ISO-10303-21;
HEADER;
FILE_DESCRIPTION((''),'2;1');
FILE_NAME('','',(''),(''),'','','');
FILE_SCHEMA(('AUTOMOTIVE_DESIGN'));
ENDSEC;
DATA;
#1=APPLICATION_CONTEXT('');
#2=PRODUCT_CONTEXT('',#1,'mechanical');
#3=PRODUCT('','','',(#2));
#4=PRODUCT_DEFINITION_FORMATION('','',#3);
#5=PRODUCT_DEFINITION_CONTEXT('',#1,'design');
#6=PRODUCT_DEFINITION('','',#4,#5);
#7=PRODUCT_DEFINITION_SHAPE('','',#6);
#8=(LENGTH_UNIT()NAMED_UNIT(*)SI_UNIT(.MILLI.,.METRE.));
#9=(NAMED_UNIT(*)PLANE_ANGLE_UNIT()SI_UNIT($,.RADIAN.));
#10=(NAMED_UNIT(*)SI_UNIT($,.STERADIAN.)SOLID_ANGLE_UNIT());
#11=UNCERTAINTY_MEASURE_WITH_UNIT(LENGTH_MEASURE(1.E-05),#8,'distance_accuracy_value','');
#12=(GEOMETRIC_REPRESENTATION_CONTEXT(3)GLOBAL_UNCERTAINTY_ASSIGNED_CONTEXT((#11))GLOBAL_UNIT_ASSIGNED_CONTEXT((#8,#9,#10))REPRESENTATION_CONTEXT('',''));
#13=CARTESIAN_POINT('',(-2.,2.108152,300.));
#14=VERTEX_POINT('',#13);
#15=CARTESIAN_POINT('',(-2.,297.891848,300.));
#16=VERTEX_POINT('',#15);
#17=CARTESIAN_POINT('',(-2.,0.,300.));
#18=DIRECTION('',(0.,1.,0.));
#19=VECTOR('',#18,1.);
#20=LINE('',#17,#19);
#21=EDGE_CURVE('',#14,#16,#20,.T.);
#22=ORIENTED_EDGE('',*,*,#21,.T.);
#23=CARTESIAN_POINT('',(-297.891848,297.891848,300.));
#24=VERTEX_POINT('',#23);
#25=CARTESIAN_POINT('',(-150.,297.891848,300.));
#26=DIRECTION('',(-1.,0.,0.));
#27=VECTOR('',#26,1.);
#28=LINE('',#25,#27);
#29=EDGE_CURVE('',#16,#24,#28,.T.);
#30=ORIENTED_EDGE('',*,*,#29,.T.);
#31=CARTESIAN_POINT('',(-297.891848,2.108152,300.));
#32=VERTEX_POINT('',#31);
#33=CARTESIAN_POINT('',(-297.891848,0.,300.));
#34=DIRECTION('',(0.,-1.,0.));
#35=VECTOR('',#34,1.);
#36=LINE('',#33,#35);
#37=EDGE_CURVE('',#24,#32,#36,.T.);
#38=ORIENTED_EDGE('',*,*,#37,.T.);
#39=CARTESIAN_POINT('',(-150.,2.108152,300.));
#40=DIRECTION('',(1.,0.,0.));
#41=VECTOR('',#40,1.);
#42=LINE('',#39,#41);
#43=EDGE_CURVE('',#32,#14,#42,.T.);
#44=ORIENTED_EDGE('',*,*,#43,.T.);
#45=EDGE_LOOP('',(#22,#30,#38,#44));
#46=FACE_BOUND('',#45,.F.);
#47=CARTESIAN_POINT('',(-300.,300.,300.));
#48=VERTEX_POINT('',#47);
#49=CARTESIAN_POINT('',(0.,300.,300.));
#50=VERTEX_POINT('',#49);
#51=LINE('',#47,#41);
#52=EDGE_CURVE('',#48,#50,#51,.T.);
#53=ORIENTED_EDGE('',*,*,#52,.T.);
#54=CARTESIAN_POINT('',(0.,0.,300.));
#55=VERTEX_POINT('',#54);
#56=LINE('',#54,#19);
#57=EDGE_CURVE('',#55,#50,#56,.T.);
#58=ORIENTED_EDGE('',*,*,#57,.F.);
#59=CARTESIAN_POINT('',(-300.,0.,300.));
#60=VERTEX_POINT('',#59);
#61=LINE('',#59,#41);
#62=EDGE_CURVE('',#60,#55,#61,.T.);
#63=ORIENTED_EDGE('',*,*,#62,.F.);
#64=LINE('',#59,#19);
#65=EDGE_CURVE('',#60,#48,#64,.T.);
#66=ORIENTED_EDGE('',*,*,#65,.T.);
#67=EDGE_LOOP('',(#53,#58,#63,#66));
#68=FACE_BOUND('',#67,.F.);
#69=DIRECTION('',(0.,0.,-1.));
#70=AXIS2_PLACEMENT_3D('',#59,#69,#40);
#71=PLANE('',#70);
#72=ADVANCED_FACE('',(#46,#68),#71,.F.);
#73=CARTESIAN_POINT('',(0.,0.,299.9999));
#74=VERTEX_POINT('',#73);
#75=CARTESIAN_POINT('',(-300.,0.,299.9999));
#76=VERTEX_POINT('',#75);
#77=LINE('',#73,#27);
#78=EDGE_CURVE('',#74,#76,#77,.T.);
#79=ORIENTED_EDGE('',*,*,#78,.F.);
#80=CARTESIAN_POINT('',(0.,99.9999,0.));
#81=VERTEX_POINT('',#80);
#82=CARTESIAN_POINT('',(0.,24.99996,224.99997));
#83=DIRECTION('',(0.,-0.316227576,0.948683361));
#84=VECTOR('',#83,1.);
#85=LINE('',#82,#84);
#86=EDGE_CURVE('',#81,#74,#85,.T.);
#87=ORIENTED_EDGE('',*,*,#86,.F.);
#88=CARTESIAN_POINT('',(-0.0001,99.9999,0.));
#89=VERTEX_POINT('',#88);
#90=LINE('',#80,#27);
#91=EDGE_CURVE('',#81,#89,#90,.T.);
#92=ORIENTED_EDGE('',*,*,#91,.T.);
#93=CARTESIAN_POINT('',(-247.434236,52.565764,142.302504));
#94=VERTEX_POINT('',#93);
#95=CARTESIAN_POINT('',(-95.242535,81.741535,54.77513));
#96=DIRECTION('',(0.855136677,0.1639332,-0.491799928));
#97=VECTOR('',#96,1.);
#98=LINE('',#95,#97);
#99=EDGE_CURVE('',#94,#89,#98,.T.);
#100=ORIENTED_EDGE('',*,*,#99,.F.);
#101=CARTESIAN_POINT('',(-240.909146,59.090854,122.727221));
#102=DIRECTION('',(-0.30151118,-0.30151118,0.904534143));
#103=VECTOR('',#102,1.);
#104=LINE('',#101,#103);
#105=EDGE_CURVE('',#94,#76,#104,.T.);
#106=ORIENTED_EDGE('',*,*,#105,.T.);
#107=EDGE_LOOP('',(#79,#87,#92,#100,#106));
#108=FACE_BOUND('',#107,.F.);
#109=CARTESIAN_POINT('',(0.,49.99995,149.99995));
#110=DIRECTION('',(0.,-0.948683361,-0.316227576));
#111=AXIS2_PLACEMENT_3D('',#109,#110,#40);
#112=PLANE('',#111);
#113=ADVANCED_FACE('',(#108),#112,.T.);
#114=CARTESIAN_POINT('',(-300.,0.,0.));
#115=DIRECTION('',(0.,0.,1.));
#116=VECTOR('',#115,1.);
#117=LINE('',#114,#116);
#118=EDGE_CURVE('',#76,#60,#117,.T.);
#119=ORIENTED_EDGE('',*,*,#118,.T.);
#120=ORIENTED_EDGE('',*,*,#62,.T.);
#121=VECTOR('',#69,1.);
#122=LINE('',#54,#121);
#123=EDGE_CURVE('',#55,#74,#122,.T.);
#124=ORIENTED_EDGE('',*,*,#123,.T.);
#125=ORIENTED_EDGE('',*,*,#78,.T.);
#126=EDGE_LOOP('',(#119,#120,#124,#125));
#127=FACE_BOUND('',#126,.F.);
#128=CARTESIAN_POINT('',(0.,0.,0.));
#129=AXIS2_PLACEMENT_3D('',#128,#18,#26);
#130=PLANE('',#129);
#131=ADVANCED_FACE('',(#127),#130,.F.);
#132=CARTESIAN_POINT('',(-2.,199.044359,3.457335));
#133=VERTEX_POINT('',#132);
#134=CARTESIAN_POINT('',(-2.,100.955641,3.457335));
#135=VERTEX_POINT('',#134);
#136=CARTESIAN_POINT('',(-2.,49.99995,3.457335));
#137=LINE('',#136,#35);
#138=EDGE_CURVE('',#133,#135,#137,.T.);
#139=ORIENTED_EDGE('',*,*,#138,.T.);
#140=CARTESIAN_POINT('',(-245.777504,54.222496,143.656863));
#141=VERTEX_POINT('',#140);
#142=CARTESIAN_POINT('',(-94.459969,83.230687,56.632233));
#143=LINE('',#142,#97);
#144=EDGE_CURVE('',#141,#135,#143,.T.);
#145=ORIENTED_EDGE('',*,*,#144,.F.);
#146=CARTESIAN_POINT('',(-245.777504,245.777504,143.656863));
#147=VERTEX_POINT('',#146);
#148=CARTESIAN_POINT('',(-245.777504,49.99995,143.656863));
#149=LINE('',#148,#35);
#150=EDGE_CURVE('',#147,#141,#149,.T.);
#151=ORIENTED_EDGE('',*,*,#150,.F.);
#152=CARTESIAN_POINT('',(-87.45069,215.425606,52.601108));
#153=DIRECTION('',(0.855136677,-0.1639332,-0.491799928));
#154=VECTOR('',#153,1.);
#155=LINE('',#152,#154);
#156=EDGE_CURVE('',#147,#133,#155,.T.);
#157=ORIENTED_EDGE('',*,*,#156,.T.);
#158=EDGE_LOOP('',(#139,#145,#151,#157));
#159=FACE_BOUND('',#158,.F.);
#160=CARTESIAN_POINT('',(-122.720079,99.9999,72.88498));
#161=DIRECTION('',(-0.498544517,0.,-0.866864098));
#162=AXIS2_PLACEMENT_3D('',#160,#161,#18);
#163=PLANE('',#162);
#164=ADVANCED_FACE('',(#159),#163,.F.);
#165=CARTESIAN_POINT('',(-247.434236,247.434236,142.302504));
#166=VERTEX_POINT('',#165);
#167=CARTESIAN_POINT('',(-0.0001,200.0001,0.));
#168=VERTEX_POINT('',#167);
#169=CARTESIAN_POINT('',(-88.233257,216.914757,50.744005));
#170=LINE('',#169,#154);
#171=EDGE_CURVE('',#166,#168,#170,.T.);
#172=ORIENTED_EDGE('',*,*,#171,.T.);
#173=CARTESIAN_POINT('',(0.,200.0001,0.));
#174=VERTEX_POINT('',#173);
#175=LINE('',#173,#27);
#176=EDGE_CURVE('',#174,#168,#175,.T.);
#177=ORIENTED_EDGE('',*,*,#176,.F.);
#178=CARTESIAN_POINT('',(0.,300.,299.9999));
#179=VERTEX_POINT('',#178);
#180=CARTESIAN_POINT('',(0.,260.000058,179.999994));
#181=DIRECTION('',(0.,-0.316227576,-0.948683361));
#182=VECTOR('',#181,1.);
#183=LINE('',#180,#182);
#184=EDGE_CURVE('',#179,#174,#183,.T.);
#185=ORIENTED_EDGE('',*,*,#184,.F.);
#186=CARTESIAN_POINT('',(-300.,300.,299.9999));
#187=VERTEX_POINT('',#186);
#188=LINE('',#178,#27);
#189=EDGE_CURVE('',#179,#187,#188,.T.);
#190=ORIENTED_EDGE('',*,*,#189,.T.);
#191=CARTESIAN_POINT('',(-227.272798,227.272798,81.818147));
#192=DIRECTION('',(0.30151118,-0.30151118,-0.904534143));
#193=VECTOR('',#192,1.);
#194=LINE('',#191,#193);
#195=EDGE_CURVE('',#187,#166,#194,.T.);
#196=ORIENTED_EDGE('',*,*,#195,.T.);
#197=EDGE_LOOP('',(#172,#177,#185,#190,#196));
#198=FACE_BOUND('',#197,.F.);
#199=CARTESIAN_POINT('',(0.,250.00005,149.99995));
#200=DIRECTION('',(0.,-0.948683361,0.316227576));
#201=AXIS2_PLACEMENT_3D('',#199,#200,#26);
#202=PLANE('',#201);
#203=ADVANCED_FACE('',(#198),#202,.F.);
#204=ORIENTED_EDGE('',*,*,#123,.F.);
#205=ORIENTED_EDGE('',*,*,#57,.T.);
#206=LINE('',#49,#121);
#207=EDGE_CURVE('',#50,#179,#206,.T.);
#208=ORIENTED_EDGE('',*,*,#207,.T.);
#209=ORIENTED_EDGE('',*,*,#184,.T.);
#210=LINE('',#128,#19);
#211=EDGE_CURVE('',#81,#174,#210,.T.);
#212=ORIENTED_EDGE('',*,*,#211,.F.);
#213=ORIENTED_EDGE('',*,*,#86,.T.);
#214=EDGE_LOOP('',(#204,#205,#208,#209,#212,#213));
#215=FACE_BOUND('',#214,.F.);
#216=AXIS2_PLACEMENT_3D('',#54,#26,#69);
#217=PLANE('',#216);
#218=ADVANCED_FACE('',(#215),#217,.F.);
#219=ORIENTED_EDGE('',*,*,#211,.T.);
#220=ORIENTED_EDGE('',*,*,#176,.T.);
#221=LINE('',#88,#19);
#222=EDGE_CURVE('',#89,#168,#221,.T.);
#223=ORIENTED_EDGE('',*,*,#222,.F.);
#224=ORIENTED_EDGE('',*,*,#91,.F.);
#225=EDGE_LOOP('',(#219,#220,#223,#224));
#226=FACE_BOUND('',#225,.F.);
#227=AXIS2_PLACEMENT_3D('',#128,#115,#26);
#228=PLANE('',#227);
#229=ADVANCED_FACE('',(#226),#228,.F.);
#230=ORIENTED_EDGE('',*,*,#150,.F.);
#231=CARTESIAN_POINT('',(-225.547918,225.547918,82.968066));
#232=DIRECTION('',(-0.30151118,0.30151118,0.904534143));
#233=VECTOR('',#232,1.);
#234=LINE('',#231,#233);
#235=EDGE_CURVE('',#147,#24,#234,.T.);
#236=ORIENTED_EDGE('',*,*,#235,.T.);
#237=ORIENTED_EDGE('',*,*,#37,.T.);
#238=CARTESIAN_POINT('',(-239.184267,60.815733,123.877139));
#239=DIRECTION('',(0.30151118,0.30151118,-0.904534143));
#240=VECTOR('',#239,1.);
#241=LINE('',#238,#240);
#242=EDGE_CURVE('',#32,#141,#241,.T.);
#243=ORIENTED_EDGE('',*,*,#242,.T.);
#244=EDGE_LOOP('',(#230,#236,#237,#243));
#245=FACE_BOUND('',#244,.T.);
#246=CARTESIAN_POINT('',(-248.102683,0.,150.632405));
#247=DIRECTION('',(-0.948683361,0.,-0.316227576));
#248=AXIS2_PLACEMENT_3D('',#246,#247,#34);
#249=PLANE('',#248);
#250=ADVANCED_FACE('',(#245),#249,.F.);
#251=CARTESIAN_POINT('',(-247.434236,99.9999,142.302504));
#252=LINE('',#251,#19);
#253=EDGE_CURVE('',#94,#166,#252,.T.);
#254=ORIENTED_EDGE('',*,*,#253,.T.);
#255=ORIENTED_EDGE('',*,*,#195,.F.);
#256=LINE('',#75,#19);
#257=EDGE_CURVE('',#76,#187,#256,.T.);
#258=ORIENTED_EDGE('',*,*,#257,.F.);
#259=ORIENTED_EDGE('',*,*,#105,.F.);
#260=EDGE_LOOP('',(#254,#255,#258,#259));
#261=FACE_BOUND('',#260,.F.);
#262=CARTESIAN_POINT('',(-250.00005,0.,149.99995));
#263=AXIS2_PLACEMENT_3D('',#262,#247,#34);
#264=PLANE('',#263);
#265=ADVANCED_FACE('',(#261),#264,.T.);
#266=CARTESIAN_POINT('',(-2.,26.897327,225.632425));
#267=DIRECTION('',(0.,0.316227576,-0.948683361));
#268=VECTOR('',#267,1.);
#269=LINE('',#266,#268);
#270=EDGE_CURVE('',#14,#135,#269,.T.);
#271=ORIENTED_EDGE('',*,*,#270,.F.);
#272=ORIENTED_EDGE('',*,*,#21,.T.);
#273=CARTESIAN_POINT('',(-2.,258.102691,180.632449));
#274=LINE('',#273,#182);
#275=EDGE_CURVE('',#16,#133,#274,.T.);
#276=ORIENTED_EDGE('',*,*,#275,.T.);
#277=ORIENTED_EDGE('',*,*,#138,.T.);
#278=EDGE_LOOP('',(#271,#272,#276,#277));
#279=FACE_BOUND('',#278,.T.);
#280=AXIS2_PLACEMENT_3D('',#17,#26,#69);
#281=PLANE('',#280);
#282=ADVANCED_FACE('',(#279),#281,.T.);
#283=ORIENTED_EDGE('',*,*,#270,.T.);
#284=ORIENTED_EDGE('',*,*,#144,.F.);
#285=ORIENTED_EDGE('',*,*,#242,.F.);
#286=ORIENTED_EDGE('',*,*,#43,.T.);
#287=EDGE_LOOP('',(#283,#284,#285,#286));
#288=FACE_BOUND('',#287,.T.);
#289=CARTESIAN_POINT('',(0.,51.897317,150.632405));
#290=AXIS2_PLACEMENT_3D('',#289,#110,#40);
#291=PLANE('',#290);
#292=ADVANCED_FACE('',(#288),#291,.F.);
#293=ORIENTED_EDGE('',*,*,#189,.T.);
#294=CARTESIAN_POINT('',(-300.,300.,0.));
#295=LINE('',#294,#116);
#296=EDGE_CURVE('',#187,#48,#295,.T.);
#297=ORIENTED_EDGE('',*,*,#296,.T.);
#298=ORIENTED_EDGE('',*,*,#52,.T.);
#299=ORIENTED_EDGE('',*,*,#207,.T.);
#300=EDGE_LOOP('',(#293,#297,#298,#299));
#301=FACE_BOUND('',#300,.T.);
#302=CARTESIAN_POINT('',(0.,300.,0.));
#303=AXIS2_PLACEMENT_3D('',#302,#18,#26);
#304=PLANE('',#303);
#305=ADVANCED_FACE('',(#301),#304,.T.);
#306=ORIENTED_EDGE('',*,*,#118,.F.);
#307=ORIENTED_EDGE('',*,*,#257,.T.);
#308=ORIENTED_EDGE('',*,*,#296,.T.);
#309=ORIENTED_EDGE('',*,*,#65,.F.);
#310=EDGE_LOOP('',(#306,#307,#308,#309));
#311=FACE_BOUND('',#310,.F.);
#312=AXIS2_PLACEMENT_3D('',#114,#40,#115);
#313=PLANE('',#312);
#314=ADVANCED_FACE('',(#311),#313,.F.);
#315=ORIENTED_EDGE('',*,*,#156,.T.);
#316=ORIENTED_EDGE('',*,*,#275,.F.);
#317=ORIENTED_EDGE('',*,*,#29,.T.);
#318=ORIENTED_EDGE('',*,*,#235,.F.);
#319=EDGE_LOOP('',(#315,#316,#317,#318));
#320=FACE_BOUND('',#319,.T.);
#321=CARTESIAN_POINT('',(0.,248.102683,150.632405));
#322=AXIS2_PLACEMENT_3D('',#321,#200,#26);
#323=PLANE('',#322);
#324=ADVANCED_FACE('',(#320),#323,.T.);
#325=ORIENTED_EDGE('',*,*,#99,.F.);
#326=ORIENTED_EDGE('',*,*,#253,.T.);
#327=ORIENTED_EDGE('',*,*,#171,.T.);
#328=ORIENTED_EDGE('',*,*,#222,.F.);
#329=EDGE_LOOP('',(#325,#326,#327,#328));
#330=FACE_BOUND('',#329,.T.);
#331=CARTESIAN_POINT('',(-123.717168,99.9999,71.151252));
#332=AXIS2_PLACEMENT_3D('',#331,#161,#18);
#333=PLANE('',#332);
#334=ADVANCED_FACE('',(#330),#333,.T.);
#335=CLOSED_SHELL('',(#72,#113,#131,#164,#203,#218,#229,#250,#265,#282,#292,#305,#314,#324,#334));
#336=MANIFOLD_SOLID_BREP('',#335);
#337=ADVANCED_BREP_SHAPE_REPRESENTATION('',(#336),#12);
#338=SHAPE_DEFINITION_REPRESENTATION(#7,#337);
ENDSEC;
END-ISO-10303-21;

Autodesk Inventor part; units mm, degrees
ref_plane "YZ Plane" through (0, 0, 0) normal (1, 0, 0) x (0, 1, 0)
ref_plane "XZ Plane" through (0, 0, 0) normal (0, 1, 0) x (-1, 0, 0)
ref_plane "XY Plane" through (0, 0, 0) normal (0, 0, 1) x (1, 0, 0)
sketch "Sketch1" plane through (0, 0, 0) normal (0, 1, 0) x (-1, 0, 0)
  line L0 (0, 0) -> (300, 0)
  line L1 (300, 0) -> (300, 300)
  line L2 (300, 300) -> (0, 300)
  line L3 (0, 300) -> (0, 0)
  dimension "d0" = 300
  dimension "d1" = 300
extrude "Extrusion1" add sketch "Sketch1" along normal blind 300
chamfer "Chamfer1" distance 100 distance2 300 1 edges at (-300, 150, 0) measured on face at (-100, 100, 0)
chamfer "Chamfer2" distance 100 distance2 300 1 edges at (-100, 0, 0) measured on face at (-66.6667, 100, 0)
chamfer "Chamfer3" distance 300 distance2 100 1 edges at (-100, 300, 0) measured on face at (-166.6667, 300, 200)
chamfer "Chamfer4" distance 150 distance2 200 1 edges at (-200.0001, 150, 0) measured on face at (-266.6667, 166.6667, 199.9999)
shell "Shell1" thickness 2 removed faces 1 at (-200, 100, 300)
properties part number "hopper"
